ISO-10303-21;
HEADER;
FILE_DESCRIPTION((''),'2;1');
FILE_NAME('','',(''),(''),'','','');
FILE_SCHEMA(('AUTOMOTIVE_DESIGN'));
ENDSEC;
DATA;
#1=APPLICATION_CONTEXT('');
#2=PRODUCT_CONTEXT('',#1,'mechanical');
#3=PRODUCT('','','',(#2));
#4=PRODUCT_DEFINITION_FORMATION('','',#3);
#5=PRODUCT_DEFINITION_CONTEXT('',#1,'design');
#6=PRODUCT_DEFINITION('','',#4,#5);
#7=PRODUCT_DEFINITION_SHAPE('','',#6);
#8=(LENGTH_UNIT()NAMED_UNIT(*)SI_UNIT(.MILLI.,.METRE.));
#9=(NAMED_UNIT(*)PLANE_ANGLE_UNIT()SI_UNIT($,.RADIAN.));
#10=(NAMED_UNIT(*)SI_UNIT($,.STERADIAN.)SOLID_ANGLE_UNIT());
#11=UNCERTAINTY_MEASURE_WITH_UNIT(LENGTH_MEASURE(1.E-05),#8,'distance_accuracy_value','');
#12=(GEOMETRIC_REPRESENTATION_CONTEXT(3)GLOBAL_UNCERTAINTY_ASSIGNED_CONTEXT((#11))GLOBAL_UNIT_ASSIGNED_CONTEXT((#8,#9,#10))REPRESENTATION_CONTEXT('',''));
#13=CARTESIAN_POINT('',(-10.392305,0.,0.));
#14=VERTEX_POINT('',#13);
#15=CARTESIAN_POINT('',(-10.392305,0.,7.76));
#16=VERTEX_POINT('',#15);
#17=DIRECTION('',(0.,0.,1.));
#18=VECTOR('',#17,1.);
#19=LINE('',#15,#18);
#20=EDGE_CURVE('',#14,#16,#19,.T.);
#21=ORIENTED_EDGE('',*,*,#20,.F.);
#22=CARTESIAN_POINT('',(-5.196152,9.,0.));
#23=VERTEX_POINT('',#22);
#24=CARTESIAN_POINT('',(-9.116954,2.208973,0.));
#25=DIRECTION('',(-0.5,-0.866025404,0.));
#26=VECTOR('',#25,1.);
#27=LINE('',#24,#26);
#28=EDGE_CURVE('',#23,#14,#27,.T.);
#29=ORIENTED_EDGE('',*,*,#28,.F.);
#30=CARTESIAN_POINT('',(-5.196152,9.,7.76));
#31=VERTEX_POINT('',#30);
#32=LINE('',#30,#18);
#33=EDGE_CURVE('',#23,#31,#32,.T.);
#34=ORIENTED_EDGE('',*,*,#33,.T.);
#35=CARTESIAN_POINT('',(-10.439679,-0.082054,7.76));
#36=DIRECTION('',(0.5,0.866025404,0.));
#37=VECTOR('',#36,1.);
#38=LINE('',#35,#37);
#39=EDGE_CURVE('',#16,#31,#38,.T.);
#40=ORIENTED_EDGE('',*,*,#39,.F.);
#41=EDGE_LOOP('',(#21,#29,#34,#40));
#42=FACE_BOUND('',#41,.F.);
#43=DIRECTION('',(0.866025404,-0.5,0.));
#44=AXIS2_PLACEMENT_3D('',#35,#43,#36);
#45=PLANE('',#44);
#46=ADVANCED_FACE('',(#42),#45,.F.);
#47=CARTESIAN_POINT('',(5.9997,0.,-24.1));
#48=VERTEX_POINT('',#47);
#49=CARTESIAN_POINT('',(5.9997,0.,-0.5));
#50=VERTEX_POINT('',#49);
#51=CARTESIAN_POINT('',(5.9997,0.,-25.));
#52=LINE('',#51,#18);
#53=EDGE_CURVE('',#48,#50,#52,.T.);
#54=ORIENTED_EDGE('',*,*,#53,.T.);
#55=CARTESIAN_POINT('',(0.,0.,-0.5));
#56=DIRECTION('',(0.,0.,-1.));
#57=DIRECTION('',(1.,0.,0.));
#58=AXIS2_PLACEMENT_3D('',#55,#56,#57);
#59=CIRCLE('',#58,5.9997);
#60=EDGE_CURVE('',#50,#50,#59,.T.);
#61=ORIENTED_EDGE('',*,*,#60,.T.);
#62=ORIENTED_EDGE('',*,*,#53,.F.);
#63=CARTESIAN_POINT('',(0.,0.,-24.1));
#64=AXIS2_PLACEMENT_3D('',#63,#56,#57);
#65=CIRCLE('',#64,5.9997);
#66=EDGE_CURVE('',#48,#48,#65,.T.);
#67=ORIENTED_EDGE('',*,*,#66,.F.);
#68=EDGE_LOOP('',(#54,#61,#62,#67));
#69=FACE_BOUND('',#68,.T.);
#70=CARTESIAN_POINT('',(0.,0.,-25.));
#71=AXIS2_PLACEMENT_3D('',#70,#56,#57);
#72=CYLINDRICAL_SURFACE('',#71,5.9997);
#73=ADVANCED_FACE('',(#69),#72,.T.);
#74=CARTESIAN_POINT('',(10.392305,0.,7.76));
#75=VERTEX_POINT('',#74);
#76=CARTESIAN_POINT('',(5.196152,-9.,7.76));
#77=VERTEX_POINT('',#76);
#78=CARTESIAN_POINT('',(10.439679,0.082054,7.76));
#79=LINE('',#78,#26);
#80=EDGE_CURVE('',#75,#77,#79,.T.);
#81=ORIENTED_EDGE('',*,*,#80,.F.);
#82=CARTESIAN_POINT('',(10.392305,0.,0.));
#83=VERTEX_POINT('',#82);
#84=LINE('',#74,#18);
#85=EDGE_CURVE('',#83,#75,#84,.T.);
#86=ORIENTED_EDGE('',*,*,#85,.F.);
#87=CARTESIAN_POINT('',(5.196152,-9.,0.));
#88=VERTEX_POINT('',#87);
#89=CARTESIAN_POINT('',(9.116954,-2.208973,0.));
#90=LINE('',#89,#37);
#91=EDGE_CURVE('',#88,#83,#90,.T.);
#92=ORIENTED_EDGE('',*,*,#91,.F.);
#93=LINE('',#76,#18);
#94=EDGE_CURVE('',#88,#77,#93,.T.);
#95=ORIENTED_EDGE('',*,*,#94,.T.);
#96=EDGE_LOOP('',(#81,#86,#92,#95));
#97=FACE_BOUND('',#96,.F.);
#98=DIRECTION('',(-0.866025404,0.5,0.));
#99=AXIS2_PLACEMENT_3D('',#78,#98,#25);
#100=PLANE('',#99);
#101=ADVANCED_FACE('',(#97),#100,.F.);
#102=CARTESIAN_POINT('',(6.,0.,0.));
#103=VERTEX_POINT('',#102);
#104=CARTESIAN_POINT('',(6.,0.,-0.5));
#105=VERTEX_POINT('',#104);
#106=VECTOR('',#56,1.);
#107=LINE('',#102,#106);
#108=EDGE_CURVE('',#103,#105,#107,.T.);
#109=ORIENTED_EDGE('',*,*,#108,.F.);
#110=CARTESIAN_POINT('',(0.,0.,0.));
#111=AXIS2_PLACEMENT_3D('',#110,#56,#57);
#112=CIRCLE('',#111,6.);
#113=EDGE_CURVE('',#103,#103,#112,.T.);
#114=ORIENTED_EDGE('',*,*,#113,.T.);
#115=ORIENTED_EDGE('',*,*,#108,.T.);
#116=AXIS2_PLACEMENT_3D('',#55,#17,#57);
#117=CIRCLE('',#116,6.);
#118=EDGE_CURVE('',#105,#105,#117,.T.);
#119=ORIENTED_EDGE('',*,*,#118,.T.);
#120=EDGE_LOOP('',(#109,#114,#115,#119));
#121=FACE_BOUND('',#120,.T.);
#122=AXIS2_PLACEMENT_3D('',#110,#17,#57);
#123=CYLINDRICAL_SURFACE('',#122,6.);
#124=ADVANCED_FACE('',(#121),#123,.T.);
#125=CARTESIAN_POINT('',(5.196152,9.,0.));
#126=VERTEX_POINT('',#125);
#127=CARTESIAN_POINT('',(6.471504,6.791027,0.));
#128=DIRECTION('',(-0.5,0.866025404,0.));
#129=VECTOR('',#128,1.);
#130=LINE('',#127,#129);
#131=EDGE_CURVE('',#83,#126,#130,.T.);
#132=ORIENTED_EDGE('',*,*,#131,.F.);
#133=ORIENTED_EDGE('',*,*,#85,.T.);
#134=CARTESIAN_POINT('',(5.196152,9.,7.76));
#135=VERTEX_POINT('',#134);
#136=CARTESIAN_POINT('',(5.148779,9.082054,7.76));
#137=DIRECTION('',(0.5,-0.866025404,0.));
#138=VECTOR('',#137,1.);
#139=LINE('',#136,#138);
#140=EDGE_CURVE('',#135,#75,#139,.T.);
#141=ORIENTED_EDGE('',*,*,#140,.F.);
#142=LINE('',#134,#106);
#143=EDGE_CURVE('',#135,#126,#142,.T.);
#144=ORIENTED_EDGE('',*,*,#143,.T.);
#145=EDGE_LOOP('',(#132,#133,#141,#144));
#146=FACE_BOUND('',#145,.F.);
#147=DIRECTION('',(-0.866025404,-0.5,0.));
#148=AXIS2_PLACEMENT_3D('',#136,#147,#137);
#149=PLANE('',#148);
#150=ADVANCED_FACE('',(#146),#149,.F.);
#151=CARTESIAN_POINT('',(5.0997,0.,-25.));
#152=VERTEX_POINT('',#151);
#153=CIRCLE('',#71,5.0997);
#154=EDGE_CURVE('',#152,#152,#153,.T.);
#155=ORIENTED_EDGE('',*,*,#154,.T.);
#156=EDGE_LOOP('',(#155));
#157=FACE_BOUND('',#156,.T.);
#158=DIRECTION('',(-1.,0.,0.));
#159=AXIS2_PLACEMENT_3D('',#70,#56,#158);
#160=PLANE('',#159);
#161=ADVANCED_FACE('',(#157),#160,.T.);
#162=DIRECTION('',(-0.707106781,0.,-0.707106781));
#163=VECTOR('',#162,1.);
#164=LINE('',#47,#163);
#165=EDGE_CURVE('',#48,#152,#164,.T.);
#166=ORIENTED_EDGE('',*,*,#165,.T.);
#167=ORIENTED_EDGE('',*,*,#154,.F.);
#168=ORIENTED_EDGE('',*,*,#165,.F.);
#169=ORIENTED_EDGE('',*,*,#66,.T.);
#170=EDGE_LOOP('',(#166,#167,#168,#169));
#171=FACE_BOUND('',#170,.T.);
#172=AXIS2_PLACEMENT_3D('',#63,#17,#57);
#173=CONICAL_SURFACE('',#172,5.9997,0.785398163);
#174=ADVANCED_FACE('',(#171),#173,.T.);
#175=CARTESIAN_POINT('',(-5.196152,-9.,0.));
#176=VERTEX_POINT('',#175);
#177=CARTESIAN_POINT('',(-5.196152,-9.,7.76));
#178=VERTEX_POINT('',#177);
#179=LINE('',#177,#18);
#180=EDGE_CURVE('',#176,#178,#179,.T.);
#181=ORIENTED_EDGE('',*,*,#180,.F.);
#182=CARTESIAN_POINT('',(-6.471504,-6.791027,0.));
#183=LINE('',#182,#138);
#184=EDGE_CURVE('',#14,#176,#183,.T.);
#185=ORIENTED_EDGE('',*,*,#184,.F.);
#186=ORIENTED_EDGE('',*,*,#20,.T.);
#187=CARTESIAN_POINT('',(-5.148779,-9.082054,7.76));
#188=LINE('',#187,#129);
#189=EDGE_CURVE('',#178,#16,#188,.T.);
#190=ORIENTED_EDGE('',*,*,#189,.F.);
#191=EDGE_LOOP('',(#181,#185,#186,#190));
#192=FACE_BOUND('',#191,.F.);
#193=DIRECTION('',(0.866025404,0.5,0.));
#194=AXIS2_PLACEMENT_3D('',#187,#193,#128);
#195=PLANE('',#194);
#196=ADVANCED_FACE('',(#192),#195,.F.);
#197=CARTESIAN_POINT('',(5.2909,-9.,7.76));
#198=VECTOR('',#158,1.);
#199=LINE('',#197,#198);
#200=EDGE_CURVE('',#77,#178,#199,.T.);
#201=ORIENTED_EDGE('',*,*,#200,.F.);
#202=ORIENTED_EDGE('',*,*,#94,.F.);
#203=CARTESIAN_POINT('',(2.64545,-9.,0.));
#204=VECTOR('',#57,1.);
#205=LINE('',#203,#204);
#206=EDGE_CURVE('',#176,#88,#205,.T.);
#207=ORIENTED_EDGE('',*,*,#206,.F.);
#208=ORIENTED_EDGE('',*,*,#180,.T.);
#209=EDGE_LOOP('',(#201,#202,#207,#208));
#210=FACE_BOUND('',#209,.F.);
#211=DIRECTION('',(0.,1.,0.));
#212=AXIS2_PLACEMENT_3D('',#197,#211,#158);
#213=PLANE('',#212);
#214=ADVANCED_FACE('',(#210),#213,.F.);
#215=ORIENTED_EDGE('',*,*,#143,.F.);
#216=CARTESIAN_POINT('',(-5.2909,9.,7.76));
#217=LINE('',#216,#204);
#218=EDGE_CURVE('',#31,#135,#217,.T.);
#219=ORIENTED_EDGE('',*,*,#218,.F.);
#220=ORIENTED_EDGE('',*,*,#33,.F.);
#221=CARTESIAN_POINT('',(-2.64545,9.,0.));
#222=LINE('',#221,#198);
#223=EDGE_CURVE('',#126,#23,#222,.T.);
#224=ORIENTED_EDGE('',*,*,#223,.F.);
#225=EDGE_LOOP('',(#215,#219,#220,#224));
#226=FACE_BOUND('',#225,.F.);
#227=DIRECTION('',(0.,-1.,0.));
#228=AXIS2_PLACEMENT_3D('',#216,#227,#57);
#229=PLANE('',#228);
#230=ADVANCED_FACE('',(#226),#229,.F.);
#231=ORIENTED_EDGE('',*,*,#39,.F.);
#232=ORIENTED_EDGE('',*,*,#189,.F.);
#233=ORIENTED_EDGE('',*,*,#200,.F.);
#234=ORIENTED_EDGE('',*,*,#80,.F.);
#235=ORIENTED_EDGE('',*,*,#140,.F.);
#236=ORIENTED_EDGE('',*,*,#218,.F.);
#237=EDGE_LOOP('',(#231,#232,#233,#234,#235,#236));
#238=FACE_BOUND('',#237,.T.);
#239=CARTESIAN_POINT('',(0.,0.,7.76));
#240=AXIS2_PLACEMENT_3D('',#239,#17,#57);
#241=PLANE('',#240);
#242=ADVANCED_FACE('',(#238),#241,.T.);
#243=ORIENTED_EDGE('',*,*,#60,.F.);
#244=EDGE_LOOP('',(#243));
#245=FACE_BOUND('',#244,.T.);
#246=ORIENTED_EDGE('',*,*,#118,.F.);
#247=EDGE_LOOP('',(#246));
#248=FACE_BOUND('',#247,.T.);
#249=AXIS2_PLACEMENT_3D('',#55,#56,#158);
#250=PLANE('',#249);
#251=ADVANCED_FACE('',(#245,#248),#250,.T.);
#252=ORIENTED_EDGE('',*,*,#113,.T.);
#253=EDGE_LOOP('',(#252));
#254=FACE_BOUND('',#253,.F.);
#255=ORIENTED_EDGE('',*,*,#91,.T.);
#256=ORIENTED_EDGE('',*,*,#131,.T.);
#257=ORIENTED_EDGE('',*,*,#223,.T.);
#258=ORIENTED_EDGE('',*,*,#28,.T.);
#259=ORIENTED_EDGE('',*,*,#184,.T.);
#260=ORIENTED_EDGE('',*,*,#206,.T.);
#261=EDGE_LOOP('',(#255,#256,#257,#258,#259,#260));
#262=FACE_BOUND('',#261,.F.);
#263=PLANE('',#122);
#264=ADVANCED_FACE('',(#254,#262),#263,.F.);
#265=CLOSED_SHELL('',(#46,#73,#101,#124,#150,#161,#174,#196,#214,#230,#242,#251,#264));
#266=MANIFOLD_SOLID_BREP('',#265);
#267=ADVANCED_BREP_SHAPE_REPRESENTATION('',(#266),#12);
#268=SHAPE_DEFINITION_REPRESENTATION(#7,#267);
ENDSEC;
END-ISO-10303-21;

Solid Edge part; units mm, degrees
sketch "Sketch1" plane through (0, 0, 0) normal (0, 0, 1) x (1, 0, 0)
  circle A0 centre (0, 0) radius 10.44
  dimension "D1" = 20.88
extrude "Protrusion1" add sketch "Sketch1" along normal blind 7.76
sketch "Sketch2" plane through (0, 0, 0) normal (0, 0, -1) x (1, 0, 0)
  circle A0 centre (0, 0) radius 6
extrude "Protrusion2" add sketch "Sketch2" along normal blind 25
sketch "Sketch3" plane through (0, 0, -25) normal (0, 0, -1) x (1, 0, 0)
  circle A0 centre (0, 0) radius 5.9997
extrude "Cutout1" cut sketch "Sketch3" against normal blind 24.5 flip side to cut
chamfer "Chamfer_1" distance 0.9 angle 45 1 edges at (-5.9997, 0, -25)
sketch "Sketch4" plane through (0, 0, 7.76) normal (0, 0, 1) x (1, 0, 0)
  line L0 (-5.2909, 9) -> (5.2909, 9)
  dimension "D1" = 18
extrude "Cutout2" cut sketch "Sketch4" against normal up to next material side at (0, 9.05, 7.76)
pattern_circular "Pattern1" count 6 over 360 about axis through (0, 0, 7.76) along (0, 0, 1) of "Cutout2"
properties part number "24104510"
